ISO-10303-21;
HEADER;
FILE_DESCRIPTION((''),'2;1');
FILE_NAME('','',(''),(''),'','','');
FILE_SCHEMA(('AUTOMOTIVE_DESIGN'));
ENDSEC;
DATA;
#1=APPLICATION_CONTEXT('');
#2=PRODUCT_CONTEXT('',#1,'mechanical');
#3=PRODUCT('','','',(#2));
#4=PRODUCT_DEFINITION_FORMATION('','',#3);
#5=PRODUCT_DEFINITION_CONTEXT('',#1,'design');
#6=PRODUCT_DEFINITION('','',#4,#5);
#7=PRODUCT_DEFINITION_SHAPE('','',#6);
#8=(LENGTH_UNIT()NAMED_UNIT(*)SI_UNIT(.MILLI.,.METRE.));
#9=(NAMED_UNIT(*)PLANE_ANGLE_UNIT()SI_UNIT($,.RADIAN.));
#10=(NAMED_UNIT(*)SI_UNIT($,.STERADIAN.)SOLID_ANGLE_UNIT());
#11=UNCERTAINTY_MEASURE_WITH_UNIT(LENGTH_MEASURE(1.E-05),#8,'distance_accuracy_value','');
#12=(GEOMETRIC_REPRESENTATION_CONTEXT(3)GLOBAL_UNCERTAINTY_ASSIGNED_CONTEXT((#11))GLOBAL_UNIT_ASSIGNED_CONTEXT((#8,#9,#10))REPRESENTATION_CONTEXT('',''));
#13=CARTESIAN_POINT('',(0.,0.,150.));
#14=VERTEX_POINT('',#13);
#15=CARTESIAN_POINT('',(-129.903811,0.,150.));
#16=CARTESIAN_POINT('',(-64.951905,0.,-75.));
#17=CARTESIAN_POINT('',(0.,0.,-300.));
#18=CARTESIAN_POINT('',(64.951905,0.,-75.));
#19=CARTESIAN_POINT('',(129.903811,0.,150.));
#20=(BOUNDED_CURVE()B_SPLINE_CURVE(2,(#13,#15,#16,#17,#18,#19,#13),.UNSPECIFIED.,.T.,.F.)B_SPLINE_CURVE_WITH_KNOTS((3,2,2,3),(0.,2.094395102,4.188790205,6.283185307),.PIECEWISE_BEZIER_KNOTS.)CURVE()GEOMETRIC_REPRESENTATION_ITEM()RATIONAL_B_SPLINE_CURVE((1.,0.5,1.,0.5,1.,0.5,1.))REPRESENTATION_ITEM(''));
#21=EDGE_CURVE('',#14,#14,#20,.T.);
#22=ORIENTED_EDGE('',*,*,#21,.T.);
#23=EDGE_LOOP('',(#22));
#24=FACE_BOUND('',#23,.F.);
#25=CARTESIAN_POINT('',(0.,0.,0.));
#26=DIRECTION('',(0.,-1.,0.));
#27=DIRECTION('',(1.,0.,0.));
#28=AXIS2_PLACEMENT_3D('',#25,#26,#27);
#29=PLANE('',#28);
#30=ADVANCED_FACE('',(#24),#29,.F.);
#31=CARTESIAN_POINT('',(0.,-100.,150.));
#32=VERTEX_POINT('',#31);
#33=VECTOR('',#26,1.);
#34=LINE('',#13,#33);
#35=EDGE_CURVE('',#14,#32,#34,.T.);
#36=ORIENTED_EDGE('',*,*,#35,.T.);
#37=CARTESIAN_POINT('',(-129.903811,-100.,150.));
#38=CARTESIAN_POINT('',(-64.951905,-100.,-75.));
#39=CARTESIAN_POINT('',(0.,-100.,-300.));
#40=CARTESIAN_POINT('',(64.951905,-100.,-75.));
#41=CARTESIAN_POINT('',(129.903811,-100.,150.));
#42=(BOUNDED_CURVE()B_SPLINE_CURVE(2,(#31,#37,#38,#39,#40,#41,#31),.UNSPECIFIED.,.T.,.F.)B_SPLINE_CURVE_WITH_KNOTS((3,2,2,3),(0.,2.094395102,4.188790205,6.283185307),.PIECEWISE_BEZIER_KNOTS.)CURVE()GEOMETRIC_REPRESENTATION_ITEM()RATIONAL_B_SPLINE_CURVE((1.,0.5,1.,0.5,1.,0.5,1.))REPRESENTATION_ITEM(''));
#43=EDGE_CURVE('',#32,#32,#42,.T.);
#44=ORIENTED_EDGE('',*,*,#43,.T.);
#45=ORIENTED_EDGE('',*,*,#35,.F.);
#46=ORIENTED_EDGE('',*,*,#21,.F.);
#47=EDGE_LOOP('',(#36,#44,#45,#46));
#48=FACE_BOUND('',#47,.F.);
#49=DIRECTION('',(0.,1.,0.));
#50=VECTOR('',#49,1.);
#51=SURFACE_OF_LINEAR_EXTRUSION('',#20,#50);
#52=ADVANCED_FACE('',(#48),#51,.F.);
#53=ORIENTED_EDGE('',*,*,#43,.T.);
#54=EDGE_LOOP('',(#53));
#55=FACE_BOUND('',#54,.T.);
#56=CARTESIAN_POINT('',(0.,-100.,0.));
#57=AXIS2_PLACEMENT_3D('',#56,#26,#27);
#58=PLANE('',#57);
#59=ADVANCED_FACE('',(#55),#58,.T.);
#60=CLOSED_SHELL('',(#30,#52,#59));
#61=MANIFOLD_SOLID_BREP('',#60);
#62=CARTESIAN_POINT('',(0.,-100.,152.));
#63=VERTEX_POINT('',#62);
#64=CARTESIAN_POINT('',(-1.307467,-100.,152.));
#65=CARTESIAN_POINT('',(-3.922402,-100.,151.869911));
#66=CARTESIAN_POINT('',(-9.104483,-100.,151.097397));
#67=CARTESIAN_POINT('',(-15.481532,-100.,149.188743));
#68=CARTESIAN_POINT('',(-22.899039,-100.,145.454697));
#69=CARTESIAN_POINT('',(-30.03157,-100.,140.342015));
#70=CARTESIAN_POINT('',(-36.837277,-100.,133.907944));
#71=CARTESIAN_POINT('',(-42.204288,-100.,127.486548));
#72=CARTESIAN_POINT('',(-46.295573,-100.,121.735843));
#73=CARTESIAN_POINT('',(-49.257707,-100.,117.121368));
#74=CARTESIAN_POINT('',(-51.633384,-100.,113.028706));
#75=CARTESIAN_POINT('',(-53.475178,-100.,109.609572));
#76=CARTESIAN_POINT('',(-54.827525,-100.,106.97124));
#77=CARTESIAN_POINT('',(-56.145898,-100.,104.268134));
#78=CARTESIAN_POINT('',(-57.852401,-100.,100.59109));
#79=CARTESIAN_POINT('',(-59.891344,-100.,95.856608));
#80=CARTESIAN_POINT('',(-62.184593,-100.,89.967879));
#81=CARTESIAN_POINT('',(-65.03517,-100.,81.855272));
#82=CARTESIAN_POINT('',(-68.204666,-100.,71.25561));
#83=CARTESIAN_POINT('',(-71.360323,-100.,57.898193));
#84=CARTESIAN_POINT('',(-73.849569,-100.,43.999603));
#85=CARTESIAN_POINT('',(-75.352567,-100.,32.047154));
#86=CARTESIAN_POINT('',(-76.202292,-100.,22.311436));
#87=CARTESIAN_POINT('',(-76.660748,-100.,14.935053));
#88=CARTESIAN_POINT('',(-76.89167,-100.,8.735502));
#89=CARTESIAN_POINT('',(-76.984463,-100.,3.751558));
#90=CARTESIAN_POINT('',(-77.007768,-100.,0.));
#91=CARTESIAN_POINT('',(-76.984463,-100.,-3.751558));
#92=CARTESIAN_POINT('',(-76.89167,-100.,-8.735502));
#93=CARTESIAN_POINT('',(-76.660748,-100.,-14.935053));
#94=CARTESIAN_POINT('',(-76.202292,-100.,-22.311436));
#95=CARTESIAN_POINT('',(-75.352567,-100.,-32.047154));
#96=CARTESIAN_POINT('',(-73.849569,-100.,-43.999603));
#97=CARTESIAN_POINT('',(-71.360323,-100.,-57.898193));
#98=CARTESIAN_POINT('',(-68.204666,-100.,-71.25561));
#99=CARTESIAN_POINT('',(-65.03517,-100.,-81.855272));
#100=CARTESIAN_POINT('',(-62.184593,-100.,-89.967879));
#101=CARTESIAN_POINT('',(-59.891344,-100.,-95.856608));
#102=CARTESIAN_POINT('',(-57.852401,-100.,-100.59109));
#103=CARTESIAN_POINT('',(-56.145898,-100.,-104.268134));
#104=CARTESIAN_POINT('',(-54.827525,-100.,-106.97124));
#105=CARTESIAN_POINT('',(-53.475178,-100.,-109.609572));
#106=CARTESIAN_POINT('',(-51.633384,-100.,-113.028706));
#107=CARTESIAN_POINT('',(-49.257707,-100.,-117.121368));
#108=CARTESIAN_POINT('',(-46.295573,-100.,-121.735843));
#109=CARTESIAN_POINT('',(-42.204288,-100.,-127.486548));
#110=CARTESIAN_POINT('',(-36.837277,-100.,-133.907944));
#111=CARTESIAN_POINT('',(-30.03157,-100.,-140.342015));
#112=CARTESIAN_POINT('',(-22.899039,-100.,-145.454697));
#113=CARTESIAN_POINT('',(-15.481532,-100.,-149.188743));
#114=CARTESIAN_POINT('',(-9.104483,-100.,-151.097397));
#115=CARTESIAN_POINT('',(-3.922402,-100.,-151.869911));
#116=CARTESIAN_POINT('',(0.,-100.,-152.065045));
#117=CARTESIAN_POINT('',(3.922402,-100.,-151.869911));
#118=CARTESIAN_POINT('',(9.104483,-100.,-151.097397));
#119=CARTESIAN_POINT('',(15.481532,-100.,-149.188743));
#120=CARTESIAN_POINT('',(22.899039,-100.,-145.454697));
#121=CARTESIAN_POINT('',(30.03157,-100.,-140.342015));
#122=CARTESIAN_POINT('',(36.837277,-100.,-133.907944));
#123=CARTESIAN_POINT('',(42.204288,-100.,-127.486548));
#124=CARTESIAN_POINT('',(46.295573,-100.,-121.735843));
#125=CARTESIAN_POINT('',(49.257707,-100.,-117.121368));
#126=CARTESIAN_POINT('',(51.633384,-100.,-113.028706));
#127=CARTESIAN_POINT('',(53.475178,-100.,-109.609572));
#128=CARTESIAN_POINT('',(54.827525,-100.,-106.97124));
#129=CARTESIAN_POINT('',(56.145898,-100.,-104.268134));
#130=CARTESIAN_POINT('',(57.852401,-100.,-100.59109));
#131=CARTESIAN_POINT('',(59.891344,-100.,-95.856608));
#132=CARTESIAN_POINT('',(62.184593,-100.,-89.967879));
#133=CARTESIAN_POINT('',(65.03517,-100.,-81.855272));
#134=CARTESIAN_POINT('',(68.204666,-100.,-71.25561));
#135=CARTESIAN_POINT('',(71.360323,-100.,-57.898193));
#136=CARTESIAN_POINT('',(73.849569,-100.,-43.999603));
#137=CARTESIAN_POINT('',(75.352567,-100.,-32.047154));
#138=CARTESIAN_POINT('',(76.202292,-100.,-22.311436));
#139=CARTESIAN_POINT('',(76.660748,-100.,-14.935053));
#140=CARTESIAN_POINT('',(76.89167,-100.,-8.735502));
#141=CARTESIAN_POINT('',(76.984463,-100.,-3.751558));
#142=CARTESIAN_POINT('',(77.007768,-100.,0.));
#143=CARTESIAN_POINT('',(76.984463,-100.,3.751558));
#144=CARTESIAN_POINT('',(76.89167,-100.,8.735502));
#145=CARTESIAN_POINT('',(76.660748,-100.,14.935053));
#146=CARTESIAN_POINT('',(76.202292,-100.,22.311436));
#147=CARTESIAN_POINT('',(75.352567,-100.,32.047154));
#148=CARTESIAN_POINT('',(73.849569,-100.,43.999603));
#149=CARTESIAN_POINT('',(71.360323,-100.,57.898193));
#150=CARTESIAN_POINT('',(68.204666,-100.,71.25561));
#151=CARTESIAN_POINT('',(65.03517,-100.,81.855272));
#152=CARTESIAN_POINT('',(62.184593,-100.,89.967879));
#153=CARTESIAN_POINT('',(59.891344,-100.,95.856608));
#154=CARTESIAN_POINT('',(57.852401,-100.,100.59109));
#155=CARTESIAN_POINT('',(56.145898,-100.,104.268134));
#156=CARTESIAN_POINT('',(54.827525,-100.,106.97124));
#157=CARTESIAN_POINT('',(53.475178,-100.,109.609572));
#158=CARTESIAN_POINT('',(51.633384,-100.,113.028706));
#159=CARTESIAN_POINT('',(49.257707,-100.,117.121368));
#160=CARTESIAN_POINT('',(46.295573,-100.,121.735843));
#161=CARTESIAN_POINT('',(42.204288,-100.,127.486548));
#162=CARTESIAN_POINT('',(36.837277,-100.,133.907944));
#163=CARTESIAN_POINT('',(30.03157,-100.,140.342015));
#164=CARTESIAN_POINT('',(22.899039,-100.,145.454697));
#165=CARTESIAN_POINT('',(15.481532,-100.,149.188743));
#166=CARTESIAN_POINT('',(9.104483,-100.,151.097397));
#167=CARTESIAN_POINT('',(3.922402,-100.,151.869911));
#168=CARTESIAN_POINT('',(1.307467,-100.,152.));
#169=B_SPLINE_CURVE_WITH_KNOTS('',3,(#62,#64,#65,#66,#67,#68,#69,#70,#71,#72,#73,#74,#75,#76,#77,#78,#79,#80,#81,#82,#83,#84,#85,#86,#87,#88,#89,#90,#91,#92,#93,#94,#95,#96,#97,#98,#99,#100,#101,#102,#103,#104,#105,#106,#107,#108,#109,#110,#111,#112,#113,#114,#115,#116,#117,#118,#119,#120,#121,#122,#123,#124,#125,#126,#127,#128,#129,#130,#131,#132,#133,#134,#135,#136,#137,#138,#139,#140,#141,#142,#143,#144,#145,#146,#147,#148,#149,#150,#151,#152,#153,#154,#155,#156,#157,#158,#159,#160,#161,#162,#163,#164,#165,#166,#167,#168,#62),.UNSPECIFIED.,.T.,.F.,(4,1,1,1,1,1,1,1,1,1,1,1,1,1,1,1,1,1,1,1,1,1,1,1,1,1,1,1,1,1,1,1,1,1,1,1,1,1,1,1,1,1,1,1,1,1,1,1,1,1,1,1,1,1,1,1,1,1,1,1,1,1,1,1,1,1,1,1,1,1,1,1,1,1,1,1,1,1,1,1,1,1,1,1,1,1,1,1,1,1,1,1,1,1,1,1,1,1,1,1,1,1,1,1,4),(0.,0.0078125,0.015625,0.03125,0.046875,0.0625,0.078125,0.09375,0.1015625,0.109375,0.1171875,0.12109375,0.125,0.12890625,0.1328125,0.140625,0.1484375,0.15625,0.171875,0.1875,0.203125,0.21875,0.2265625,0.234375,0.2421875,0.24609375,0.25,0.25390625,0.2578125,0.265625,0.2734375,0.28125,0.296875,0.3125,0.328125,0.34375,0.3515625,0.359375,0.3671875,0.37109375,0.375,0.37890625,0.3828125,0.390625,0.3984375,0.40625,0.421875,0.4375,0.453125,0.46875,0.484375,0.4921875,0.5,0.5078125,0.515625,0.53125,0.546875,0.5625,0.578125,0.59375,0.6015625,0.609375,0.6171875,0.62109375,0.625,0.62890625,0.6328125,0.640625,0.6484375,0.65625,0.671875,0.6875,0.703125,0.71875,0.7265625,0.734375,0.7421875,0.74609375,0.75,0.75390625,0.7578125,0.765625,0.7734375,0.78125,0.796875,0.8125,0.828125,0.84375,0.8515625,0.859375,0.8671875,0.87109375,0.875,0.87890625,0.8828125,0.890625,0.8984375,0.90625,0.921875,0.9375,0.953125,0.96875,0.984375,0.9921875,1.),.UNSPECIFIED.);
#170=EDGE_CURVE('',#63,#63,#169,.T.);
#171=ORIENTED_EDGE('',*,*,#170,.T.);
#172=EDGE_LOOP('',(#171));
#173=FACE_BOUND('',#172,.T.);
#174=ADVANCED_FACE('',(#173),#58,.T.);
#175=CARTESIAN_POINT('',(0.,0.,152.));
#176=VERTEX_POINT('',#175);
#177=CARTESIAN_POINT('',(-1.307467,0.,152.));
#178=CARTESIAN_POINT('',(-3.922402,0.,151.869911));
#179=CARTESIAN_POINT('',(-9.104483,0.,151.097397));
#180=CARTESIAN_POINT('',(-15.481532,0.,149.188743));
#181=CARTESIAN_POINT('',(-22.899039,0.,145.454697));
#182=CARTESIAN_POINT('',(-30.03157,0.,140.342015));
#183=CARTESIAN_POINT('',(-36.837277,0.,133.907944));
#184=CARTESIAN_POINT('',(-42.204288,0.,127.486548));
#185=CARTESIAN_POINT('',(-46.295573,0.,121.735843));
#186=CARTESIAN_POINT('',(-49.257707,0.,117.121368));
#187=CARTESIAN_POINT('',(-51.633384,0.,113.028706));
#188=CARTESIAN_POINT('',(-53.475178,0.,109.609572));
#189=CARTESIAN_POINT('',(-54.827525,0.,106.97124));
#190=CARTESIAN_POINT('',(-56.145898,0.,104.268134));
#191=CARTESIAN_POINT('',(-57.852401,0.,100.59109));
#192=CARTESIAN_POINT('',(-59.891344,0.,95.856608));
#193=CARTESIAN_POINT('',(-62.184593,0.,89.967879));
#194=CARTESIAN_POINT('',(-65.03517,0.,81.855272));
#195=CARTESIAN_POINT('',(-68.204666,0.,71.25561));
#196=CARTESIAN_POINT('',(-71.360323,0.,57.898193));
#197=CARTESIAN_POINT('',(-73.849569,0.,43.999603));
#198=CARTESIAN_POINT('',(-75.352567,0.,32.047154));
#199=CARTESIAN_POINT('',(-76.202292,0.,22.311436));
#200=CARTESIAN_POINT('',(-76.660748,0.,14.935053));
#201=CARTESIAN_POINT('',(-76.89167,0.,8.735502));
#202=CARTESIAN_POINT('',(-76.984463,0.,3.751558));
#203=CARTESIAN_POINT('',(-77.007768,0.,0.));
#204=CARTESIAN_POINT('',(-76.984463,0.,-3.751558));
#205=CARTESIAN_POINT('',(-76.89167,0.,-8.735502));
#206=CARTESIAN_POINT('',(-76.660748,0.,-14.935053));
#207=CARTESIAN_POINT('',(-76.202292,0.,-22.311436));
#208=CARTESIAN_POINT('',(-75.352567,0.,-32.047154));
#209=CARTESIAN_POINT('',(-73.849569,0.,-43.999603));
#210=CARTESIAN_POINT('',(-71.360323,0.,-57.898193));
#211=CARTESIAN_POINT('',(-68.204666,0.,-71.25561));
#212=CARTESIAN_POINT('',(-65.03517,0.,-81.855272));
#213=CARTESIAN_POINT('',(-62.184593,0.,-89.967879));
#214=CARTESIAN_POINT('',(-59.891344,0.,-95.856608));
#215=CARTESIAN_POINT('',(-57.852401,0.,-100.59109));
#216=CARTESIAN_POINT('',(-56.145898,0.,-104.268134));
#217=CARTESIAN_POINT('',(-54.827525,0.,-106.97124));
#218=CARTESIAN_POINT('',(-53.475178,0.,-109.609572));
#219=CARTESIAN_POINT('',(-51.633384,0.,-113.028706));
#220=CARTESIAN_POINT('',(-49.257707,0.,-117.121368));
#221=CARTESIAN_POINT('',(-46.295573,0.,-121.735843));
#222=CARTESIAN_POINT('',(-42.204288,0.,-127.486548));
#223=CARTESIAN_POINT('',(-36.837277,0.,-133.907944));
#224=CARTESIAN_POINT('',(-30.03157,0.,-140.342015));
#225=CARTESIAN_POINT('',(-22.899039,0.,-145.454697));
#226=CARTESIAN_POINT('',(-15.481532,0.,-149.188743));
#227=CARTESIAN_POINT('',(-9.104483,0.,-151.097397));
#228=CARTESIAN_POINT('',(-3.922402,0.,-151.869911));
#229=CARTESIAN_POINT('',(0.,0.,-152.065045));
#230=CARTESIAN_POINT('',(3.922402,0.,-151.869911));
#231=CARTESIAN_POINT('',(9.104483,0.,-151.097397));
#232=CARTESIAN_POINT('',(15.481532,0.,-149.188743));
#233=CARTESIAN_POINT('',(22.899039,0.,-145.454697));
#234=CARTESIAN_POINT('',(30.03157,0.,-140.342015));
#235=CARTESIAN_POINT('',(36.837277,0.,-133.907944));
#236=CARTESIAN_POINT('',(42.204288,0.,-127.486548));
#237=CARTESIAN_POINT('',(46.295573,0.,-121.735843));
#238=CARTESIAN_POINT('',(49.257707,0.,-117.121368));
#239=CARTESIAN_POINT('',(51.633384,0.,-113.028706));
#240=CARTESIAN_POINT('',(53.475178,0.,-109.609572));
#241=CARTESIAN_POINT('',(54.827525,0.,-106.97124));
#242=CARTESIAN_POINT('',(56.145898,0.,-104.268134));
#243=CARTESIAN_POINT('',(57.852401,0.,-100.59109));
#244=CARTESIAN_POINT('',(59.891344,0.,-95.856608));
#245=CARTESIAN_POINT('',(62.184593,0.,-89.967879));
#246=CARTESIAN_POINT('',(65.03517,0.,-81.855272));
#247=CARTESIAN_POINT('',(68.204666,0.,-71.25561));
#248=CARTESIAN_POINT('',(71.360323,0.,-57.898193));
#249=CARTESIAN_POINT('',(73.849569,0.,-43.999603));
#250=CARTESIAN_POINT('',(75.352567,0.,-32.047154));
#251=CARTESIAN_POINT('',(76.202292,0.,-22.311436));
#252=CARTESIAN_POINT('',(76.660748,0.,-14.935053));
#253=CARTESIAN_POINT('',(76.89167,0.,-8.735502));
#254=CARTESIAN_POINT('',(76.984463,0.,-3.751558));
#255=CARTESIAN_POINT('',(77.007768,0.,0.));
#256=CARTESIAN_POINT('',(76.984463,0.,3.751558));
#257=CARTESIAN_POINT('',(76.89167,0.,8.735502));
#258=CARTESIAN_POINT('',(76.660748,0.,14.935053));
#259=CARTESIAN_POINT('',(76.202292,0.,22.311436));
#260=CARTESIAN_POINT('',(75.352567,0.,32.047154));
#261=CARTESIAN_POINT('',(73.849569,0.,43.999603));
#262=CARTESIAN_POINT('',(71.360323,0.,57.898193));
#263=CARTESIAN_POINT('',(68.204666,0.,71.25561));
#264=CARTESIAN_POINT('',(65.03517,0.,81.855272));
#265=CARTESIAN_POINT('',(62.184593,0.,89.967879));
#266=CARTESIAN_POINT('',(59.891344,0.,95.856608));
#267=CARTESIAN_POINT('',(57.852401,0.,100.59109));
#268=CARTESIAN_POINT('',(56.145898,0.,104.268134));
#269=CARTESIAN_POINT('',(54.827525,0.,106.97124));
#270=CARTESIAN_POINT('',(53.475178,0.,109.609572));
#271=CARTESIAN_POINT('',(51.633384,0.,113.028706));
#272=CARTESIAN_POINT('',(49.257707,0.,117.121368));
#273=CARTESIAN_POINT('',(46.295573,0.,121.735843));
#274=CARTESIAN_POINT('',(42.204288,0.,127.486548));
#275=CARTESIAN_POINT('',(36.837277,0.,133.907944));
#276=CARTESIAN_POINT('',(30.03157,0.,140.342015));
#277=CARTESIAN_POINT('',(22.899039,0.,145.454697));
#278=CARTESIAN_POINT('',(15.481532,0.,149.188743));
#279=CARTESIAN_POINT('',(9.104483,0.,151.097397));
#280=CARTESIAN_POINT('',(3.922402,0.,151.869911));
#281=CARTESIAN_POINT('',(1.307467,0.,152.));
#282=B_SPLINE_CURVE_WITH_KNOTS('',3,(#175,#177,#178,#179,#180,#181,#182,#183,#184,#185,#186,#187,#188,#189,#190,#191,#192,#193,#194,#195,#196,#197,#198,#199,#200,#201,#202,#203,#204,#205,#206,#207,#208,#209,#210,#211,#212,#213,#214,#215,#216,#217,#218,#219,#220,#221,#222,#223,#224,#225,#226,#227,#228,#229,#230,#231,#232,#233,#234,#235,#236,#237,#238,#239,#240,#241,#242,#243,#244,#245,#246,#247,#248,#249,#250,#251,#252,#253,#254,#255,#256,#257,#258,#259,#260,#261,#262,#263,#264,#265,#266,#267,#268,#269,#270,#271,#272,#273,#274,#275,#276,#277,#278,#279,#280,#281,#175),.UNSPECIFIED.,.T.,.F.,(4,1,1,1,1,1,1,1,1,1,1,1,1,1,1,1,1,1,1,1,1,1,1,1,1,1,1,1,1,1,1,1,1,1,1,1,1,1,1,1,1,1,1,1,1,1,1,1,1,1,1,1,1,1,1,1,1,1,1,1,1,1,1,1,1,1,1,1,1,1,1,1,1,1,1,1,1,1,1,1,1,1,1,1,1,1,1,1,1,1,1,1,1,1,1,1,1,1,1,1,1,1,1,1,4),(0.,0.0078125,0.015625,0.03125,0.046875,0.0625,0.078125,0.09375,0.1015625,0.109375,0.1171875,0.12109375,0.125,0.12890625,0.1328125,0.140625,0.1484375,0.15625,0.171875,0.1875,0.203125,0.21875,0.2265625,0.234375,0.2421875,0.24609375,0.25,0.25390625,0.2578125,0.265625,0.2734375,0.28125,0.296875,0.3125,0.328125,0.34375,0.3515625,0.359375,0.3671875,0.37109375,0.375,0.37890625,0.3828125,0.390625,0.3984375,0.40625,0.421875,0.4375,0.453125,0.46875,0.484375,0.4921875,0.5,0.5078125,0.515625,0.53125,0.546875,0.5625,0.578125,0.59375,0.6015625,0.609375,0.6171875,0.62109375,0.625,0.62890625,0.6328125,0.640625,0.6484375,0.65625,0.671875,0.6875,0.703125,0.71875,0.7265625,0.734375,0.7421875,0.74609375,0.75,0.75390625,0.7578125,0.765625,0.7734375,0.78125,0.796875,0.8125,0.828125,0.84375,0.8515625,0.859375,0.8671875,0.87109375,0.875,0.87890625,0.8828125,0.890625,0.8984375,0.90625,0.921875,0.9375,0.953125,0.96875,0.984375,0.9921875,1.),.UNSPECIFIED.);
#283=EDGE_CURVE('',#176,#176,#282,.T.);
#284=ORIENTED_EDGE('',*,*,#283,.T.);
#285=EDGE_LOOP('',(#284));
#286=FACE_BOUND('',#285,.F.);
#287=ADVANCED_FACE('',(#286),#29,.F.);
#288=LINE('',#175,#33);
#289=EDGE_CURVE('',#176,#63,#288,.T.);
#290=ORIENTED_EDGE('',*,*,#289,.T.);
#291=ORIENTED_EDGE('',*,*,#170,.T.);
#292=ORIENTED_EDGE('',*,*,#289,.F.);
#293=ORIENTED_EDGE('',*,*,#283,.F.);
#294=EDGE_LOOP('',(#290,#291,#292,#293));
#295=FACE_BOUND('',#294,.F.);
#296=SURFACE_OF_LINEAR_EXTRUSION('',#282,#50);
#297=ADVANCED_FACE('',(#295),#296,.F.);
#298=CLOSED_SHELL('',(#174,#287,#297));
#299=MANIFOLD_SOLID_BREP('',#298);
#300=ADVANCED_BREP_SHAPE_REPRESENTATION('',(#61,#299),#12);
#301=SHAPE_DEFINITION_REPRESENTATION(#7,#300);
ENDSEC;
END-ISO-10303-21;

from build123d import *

# Parameters (mm, degrees)
F2_DEPTH = 100


# Not quite as in the source:
# - the dataset's text gives a spline's control points without its knots; the knots are read off the source's solid


with BuildPart() as f2:
    # F0 (on Front) → F2 (new body)
    with BuildSketch(Plane.XZ):
        with BuildLine():
            add(Edge.make_bspline(
                [(0, 150), (-129.9038105677, 150), (-64.9519052838, -75), (0, -300), (64.9519052838, -75), (129.9038105677, 150), (0, 150)],
                knots=[0, 0, 0, 2.0943951024, 2.0943951024, 4.1887902048, 4.1887902048, 6.2831853072, 6.2831853072, 6.2831853072], degree=2, weights=[1, 0.5, 1, 0.5, 1, 0.5, 1]))
        make_face()
    extrude(amount=F2_DEPTH)


with BuildPart() as f2b:
    # F1 (on Front) → F2, piece 2 (new body)
    with BuildSketch(Plane.XZ):
        with BuildLine():
            add(Edge.make_bspline(
                [(0, 152), (-1.3074672157, 152), (-3.9224016472, 151.8699107232), (-9.1044825759, 151.0973972046), (-15.4815321623, 149.1887427851), (-22.8990391078, 145.4546974302), (-30.0315703891, 140.3420150536), (-36.8372765917, 133.9079441864), (-42.2042881637, 127.4865475907), (-46.2955734695, 121.7358433741), (-49.2577069904, 117.1213683383), (-51.6333835911, 113.0287055069), (-53.4751783426, 109.6095722887), (-54.8275254323, 106.9712401027), (-56.145897754, 104.2681335146), (-57.8524011804, 100.5910897574), (-59.8913436219, 95.8566076518), (-62.1845934145, 89.9678788906), (-65.0351700103, 81.8552716775), (-68.2046659155, 71.2556100942), (-71.3603234834, 57.8981925901), (-73.8495688249, 43.9996028347), (-75.352567076, 32.0471538143), (-76.2022918658, 22.3114362624), (-76.6607484657, 14.9350531215), (-76.8916696678, 8.7355023398), (-76.984463375, 3.7515582344), (-77.0077683125, 0), (-76.984463375, -3.7515582344), (-76.8916696678, -8.7355023398), (-76.6607484657, -14.9350531215), (-76.2022918658, -22.3114362624), (-75.352567076, -32.0471538143), (-73.8495688249, -43.9996028347), (-71.3603234834, -57.8981925901), (-68.2046659155, -71.2556100942), (-65.0351700103, -81.8552716775), (-62.1845934145, -89.9678788906), (-59.8913436219, -95.8566076518), (-57.8524011804, -100.5910897574), (-56.145897754, -104.2681335146), (-54.8275254323, -106.9712401027), (-53.4751783426, -109.6095722887), (-51.6333835911, -113.0287055069), (-49.2577069904, -117.1213683383), (-46.2955734695, -121.7358433741), (-42.2042881637, -127.4865475907), (-36.8372765917, -133.9079441864), (-30.0315703891, -140.3420150536), (-22.8990391078, -145.4546974302), (-15.4815321623, -149.1887427851), (-9.1044825759, -151.0973972046), (-3.9224016472, -151.8699107232), (0, -152.0650446384), (3.9224016472, -151.8699107232), (9.1044825759, -151.0973972046), (15.4815321623, -149.1887427851), (22.8990391078, -145.4546974302), (30.0315703891, -140.3420150536), (36.8372765917, -133.9079441864), (42.2042881637, -127.4865475907), (46.2955734695, -121.7358433741), (49.2577069904, -117.1213683383), (51.6333835911, -113.0287055069), (53.4751783426, -109.6095722887), (54.8275254323, -106.9712401027), (56.145897754, -104.2681335146), (57.8524011804, -100.5910897574), (59.8913436219, -95.8566076518), (62.1845934145, -89.9678788906), (65.0351700103, -81.8552716775), (68.2046659155, -71.2556100942), (71.3603234834, -57.8981925901), (73.8495688249, -43.9996028347), (75.352567076, -32.0471538143), (76.2022918658, -22.3114362624), (76.6607484657, -14.9350531215), (76.8916696678, -8.7355023398), (76.984463375, -3.7515582344), (77.0077683125, 0), (76.984463375, 3.7515582344), (76.8916696678, 8.7355023398), (76.6607484657, 14.9350531215), (76.2022918658, 22.3114362624), (75.352567076, 32.0471538143), (73.8495688249, 43.9996028347), (71.3603234834, 57.8981925901), (68.2046659155, 71.2556100942), (65.0351700103, 81.8552716775), (62.1845934145, 89.9678788906), (59.8913436219, 95.8566076518), (57.8524011804, 100.5910897574), (56.145897754, 104.2681335146), (54.8275254323, 106.9712401027), (53.4751783426, 109.6095722887), (51.6333835911, 113.0287055069), (49.2577069904, 117.1213683383), (46.2955734695, 121.7358433741), (42.2042881637, 127.4865475907), (36.8372765917, 133.9079441864), (30.0315703891, 140.3420150536), (22.8990391078, 145.4546974302), (15.4815321623, 149.1887427851), (9.1044825759, 151.0973972046), (3.9224016472, 151.8699107232), (1.3074672157, 152), (0, 152)],
                knots=[0, 0, 0, 0, 0.0078125, 0.015625, 0.03125, 0.046875, 0.0625, 0.078125, 0.09375, 0.1015625, 0.109375, 0.1171875, 0.12109375, 0.125, 0.12890625, 0.1328125, 0.140625, 0.1484375, 0.15625, 0.171875, 0.1875, 0.203125, 0.21875, 0.2265625, 0.234375, 0.2421875, 0.24609375, 0.25, 0.25390625, 0.2578125, 0.265625, 0.2734375, 0.28125, 0.296875, 0.3125, 0.328125, 0.34375, 0.3515625, 0.359375, 0.3671875, 0.37109375, 0.375, 0.37890625, 0.3828125, 0.390625, 0.3984375, 0.40625, 0.421875, 0.4375, 0.453125, 0.46875, 0.484375, 0.4921875, 0.5, 0.5078125, 0.515625, 0.53125, 0.546875, 0.5625, 0.578125, 0.59375, 0.6015625, 0.609375, 0.6171875, 0.62109375, 0.625, 0.62890625, 0.6328125, 0.640625, 0.6484375, 0.65625, 0.671875, 0.6875, 0.703125, 0.71875, 0.7265625, 0.734375, 0.7421875, 0.74609375, 0.75, 0.75390625, 0.7578125, 0.765625, 0.7734375, 0.78125, 0.796875, 0.8125, 0.828125, 0.84375, 0.8515625, 0.859375, 0.8671875, 0.87109375, 0.875, 0.87890625, 0.8828125, 0.890625, 0.8984375, 0.90625, 0.921875, 0.9375, 0.953125, 0.96875, 0.984375, 0.9921875, 1, 1, 1, 1], degree=3))
        make_face()
    extrude(amount=F2_DEPTH)


solid = Compound([f2.part, f2b.part])
